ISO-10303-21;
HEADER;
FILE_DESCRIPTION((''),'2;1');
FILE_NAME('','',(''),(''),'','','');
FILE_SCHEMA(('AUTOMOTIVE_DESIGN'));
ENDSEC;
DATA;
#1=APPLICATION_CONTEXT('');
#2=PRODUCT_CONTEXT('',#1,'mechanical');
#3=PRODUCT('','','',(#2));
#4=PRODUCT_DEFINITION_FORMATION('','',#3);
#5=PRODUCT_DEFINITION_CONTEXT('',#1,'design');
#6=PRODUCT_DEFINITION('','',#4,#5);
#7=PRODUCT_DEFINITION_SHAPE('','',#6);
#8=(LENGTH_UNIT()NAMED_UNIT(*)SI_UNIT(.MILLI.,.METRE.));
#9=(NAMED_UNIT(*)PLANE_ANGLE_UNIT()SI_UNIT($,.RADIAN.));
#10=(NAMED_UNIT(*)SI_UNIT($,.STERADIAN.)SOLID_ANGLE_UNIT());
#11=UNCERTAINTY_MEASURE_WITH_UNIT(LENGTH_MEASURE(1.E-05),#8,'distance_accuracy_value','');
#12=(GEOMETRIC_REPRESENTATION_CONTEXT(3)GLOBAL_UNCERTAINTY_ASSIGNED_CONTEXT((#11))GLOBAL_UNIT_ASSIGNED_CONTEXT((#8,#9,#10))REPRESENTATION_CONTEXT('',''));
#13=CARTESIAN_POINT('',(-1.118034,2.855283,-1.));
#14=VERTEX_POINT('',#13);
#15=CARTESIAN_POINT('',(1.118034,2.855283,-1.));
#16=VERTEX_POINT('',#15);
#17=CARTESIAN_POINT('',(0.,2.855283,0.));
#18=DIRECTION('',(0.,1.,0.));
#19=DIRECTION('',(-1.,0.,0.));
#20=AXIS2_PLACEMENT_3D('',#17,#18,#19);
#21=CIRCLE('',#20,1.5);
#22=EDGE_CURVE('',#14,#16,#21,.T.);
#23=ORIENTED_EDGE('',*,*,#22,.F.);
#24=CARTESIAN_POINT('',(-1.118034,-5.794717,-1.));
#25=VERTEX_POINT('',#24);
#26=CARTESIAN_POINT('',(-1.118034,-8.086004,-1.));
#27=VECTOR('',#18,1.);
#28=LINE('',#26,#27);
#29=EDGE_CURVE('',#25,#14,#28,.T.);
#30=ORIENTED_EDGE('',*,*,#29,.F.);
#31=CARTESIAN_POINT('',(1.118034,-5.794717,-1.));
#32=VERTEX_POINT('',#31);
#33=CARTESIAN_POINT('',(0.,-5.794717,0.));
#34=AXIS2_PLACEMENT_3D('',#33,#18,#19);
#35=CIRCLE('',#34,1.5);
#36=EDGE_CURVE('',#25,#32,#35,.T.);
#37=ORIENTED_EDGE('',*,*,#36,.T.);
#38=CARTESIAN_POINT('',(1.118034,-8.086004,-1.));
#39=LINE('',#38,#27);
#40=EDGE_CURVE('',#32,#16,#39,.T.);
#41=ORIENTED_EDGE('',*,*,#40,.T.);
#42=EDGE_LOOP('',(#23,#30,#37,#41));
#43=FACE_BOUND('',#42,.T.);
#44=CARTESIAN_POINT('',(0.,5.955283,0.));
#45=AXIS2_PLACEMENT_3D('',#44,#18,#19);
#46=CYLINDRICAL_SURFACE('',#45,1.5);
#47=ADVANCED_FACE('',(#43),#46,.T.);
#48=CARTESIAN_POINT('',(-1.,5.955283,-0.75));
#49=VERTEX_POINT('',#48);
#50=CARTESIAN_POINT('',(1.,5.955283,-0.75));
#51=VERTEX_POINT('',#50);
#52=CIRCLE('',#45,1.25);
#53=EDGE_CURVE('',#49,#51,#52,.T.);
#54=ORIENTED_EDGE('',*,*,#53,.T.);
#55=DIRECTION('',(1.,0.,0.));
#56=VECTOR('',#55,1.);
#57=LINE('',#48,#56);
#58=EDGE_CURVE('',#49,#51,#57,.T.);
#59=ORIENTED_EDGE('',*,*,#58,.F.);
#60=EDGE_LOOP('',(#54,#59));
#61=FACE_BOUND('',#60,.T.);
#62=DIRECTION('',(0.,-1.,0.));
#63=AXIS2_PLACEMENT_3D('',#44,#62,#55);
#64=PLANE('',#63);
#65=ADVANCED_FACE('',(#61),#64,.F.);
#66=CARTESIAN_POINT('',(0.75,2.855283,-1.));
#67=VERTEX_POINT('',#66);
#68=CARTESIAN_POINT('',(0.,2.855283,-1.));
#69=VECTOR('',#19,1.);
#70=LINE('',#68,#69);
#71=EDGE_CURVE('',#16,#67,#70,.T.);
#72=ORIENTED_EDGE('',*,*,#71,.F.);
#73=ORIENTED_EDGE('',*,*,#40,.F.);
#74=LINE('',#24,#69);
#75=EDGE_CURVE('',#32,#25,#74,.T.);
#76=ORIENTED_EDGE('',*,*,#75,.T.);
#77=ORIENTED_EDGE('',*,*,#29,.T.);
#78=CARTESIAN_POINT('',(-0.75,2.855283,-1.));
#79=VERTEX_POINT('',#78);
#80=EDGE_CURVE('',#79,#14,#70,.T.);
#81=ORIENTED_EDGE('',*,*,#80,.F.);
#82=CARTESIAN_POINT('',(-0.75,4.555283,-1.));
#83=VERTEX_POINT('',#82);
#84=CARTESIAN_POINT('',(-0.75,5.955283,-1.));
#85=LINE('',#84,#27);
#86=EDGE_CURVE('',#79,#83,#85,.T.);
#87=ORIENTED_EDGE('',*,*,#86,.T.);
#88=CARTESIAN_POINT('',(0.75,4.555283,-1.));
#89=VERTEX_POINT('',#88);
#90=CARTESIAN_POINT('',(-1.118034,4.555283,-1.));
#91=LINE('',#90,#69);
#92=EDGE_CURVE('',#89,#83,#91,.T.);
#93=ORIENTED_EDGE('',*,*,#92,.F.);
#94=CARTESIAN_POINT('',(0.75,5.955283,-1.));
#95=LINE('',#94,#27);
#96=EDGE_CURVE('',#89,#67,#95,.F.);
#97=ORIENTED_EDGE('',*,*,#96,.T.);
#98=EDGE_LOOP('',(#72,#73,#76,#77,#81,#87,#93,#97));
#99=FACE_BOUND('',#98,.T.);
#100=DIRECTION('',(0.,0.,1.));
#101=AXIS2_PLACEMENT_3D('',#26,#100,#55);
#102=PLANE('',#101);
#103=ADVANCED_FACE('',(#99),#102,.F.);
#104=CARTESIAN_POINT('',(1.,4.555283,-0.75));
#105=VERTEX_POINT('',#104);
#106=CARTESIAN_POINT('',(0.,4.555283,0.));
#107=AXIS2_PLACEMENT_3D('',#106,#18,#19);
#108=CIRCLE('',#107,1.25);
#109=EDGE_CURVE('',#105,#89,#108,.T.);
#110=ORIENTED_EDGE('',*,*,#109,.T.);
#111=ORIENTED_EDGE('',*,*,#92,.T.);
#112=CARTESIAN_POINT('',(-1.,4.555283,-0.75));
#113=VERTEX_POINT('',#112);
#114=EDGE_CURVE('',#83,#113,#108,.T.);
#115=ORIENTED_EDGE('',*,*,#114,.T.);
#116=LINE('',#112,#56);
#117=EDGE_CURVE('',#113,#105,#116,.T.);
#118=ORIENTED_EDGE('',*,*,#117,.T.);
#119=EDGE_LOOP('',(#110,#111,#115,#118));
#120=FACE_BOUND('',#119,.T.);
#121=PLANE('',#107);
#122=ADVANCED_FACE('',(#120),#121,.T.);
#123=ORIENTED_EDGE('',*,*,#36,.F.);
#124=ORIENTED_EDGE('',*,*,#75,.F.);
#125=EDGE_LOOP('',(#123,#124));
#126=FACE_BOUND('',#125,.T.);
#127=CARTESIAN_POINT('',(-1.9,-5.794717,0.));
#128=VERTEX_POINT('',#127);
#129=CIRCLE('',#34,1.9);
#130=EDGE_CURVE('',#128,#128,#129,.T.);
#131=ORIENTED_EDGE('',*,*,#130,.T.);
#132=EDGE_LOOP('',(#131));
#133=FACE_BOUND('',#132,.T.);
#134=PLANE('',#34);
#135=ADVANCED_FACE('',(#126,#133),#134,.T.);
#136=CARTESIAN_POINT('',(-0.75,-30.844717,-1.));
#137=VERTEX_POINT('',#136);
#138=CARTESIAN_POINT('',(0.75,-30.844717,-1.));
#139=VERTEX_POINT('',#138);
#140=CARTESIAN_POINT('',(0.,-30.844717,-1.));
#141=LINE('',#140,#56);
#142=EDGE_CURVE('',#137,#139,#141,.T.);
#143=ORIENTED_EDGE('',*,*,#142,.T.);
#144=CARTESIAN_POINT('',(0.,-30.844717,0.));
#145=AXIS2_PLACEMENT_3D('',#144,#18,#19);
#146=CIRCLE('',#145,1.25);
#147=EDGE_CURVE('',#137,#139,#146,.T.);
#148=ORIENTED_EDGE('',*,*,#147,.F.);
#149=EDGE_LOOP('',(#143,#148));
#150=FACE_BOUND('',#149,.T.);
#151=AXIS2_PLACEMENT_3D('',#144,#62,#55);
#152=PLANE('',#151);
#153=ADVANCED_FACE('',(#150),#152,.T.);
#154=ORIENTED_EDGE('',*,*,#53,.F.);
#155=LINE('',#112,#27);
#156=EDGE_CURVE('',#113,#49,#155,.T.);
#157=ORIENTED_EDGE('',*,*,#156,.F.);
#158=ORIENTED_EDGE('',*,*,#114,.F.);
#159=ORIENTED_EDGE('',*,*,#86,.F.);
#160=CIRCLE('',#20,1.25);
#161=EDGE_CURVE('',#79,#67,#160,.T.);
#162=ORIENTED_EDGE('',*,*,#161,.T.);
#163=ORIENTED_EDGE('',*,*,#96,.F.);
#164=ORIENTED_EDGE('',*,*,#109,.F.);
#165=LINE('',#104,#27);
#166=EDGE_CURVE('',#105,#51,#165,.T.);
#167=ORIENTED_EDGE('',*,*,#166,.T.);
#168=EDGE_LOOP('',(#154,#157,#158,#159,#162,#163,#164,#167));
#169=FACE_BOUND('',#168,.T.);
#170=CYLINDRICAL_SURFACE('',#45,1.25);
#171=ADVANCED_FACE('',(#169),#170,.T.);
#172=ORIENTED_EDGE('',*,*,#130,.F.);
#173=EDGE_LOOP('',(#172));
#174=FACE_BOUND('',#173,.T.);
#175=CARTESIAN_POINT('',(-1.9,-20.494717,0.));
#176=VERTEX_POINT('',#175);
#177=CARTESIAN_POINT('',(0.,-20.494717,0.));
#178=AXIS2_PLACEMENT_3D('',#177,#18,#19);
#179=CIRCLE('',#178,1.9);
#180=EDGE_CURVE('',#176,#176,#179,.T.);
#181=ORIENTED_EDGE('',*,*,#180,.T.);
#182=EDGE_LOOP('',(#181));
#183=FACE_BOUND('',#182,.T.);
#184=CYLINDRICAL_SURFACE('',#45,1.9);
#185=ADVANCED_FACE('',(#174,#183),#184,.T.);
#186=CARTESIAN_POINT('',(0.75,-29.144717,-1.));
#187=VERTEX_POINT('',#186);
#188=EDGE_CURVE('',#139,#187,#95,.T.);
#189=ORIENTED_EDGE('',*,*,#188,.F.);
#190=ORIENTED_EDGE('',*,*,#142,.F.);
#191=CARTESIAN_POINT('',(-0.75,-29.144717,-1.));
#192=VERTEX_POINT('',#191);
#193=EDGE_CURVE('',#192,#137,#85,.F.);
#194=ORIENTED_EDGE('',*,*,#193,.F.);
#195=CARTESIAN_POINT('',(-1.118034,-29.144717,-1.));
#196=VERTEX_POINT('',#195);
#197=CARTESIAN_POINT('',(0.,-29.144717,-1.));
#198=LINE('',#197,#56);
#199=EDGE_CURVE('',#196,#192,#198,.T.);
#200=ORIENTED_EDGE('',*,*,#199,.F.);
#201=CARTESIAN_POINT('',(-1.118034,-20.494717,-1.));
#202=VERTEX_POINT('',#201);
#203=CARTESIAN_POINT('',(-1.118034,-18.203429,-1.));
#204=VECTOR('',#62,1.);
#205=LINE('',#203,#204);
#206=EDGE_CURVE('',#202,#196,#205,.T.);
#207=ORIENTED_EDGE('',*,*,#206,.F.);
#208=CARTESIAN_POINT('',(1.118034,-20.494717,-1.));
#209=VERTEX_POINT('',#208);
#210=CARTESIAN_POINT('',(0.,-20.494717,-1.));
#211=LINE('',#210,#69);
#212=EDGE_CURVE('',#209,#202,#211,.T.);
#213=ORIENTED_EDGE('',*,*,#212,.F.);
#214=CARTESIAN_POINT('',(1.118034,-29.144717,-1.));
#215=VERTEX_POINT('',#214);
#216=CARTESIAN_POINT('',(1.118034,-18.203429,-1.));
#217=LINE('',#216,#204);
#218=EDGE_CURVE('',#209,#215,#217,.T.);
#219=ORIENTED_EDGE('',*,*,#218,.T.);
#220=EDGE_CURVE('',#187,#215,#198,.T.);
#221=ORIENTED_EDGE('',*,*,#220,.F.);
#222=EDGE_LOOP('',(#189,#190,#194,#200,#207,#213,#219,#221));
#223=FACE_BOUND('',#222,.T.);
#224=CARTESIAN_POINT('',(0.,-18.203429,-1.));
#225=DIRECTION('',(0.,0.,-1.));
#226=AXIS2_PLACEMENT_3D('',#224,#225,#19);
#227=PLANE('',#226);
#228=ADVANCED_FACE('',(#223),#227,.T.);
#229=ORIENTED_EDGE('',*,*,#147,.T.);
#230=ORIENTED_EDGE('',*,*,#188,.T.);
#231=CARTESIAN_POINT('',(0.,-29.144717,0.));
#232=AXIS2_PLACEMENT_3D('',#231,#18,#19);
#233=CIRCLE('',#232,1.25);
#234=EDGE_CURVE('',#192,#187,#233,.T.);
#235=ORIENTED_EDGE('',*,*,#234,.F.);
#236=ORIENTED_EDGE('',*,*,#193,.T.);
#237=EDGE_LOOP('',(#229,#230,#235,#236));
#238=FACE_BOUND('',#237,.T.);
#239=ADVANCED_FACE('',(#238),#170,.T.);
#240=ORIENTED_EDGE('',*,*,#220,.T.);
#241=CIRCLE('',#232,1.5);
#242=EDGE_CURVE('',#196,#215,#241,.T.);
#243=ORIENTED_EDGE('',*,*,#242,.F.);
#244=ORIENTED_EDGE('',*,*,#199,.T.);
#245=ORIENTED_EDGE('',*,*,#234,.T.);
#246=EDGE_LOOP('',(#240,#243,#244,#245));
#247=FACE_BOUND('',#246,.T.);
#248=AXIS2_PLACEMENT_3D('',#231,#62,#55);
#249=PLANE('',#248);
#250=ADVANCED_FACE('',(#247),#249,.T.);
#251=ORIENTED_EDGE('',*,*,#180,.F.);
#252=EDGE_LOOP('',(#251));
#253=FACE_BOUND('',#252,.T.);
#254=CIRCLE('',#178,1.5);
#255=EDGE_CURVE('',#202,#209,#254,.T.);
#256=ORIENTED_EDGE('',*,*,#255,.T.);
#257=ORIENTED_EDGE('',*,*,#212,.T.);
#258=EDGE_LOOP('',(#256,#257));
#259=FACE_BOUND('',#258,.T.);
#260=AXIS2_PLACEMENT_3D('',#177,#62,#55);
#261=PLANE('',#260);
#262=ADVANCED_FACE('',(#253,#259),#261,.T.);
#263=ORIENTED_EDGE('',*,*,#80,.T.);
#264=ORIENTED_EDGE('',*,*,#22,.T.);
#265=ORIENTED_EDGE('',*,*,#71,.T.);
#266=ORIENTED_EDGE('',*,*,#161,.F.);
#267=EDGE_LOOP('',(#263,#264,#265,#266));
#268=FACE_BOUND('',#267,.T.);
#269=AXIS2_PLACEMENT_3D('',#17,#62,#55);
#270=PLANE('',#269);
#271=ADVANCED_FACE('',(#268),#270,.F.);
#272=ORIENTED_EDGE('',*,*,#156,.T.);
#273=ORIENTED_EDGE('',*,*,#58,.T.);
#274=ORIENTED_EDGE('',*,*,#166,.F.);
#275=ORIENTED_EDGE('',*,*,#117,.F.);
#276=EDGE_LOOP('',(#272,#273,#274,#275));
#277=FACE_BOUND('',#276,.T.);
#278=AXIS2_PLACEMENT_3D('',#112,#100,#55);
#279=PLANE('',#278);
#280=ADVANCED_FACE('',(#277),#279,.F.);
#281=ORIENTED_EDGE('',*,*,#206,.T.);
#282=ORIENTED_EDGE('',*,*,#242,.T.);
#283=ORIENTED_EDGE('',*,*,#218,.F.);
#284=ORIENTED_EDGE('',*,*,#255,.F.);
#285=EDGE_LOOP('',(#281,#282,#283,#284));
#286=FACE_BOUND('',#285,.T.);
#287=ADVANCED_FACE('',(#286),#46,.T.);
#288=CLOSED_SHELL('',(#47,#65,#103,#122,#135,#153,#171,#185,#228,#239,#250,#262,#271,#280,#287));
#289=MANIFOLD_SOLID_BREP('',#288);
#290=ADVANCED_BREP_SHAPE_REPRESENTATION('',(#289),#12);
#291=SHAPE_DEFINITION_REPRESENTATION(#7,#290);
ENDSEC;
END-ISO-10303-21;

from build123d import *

# Parameters (mm, degrees)
CUT_EXTRUDE_3_REACH = 38.898
CUT_EXTRUDE_START   = -10.35
CUT_EXTRUDE_5_DEPTH = 10.35
CUT_EXTRUDE_7_DEPTH = 1.4


with BuildPart() as part:
    # 草图1 → 旋转2 (revolve)
    with BuildSketch(Plane.XY, mode=Mode.PRIVATE) as revolve_2_sk:
        Polygon((1.25, 5.955283348), (0, 5.955283348), (0, -30.844716652), (1.25, -30.844716652), (1.25, -29.144716652), (1.5, -29.144716652), (1.5, -20.494716652), (1.9, -20.494716652), (1.9, -5.794716652), (1.5, -5.794716652), (1.5, 2.855283348), (1.25, 2.855283348), align=None)
    revolve(revolve_2_sk.sketch.rotate(Axis((0, 5.955283348, 0), (0, -1, 0)), 180), axis=Axis((0, 5.955283348, 0), (0, -1, 0)))

    # 切除-拉伸3: up to this face of the body (flat: up to its plane)
    cut_extrude_3_end = Plane(part.part.faces().sort_by_distance((1.846259885, -5.794716652, 0))[0])
    # 草图5 → 切除-拉伸3 (cut, up to the picked face)
    with BuildSketch(Plane(origin=(0, 5.955283348, 0), x_dir=(1, 0, 0), z_dir=(0, 1, 0)), mode=Mode.PRIVATE) as cut_extrude_3_sk1:
        with BuildLine():
            Line((-1.118033989, 1), (1.118033989, 1))
            ThreePointArc((1.118033989, 1), (0, 1.5), (-1.118033989, 1))
        make_face()
    cut_extrude_3_tool1 = split(extrude(cut_extrude_3_sk1.sketch, amount=-CUT_EXTRUDE_3_REACH, mode=Mode.PRIVATE), bisect_by=cut_extrude_3_end, keep=Keep.BOTH, mode=Mode.PRIVATE)
    add(cut_extrude_3_tool1.solids().sort_by(Axis((0, 5.955283, -1.203164), (0, -1, 0)))[0], mode=Mode.SUBTRACT)

    # 草图7 → 切除-拉伸5 (cut)
    with BuildSketch(Plane.XZ.offset(30.844716652).offset(CUT_EXTRUDE_START)):
        with BuildLine():
            Line((1.118033989, -1), (-1.118033989, -1))
            ThreePointArc((-1.118033989, -1), (0, -1.5), (1.118033989, -1))
        make_face()
    extrude(amount=CUT_EXTRUDE_5_DEPTH, mode=Mode.SUBTRACT)

    # 草图10 → 切除-拉伸7 (cut)
    with BuildSketch(Plane(origin=(0, 5.955283348, 0), x_dir=(1, 0, 0), z_dir=(0, 1, 0))):
        with BuildLine():
            Line((-1, 0.75), (1, 0.75))
            ThreePointArc((1, 0.75), (0, 1.25), (-1, 0.75))
        make_face()
    extrude(amount=-CUT_EXTRUDE_7_DEPTH, mode=Mode.SUBTRACT)


solid = part.part
